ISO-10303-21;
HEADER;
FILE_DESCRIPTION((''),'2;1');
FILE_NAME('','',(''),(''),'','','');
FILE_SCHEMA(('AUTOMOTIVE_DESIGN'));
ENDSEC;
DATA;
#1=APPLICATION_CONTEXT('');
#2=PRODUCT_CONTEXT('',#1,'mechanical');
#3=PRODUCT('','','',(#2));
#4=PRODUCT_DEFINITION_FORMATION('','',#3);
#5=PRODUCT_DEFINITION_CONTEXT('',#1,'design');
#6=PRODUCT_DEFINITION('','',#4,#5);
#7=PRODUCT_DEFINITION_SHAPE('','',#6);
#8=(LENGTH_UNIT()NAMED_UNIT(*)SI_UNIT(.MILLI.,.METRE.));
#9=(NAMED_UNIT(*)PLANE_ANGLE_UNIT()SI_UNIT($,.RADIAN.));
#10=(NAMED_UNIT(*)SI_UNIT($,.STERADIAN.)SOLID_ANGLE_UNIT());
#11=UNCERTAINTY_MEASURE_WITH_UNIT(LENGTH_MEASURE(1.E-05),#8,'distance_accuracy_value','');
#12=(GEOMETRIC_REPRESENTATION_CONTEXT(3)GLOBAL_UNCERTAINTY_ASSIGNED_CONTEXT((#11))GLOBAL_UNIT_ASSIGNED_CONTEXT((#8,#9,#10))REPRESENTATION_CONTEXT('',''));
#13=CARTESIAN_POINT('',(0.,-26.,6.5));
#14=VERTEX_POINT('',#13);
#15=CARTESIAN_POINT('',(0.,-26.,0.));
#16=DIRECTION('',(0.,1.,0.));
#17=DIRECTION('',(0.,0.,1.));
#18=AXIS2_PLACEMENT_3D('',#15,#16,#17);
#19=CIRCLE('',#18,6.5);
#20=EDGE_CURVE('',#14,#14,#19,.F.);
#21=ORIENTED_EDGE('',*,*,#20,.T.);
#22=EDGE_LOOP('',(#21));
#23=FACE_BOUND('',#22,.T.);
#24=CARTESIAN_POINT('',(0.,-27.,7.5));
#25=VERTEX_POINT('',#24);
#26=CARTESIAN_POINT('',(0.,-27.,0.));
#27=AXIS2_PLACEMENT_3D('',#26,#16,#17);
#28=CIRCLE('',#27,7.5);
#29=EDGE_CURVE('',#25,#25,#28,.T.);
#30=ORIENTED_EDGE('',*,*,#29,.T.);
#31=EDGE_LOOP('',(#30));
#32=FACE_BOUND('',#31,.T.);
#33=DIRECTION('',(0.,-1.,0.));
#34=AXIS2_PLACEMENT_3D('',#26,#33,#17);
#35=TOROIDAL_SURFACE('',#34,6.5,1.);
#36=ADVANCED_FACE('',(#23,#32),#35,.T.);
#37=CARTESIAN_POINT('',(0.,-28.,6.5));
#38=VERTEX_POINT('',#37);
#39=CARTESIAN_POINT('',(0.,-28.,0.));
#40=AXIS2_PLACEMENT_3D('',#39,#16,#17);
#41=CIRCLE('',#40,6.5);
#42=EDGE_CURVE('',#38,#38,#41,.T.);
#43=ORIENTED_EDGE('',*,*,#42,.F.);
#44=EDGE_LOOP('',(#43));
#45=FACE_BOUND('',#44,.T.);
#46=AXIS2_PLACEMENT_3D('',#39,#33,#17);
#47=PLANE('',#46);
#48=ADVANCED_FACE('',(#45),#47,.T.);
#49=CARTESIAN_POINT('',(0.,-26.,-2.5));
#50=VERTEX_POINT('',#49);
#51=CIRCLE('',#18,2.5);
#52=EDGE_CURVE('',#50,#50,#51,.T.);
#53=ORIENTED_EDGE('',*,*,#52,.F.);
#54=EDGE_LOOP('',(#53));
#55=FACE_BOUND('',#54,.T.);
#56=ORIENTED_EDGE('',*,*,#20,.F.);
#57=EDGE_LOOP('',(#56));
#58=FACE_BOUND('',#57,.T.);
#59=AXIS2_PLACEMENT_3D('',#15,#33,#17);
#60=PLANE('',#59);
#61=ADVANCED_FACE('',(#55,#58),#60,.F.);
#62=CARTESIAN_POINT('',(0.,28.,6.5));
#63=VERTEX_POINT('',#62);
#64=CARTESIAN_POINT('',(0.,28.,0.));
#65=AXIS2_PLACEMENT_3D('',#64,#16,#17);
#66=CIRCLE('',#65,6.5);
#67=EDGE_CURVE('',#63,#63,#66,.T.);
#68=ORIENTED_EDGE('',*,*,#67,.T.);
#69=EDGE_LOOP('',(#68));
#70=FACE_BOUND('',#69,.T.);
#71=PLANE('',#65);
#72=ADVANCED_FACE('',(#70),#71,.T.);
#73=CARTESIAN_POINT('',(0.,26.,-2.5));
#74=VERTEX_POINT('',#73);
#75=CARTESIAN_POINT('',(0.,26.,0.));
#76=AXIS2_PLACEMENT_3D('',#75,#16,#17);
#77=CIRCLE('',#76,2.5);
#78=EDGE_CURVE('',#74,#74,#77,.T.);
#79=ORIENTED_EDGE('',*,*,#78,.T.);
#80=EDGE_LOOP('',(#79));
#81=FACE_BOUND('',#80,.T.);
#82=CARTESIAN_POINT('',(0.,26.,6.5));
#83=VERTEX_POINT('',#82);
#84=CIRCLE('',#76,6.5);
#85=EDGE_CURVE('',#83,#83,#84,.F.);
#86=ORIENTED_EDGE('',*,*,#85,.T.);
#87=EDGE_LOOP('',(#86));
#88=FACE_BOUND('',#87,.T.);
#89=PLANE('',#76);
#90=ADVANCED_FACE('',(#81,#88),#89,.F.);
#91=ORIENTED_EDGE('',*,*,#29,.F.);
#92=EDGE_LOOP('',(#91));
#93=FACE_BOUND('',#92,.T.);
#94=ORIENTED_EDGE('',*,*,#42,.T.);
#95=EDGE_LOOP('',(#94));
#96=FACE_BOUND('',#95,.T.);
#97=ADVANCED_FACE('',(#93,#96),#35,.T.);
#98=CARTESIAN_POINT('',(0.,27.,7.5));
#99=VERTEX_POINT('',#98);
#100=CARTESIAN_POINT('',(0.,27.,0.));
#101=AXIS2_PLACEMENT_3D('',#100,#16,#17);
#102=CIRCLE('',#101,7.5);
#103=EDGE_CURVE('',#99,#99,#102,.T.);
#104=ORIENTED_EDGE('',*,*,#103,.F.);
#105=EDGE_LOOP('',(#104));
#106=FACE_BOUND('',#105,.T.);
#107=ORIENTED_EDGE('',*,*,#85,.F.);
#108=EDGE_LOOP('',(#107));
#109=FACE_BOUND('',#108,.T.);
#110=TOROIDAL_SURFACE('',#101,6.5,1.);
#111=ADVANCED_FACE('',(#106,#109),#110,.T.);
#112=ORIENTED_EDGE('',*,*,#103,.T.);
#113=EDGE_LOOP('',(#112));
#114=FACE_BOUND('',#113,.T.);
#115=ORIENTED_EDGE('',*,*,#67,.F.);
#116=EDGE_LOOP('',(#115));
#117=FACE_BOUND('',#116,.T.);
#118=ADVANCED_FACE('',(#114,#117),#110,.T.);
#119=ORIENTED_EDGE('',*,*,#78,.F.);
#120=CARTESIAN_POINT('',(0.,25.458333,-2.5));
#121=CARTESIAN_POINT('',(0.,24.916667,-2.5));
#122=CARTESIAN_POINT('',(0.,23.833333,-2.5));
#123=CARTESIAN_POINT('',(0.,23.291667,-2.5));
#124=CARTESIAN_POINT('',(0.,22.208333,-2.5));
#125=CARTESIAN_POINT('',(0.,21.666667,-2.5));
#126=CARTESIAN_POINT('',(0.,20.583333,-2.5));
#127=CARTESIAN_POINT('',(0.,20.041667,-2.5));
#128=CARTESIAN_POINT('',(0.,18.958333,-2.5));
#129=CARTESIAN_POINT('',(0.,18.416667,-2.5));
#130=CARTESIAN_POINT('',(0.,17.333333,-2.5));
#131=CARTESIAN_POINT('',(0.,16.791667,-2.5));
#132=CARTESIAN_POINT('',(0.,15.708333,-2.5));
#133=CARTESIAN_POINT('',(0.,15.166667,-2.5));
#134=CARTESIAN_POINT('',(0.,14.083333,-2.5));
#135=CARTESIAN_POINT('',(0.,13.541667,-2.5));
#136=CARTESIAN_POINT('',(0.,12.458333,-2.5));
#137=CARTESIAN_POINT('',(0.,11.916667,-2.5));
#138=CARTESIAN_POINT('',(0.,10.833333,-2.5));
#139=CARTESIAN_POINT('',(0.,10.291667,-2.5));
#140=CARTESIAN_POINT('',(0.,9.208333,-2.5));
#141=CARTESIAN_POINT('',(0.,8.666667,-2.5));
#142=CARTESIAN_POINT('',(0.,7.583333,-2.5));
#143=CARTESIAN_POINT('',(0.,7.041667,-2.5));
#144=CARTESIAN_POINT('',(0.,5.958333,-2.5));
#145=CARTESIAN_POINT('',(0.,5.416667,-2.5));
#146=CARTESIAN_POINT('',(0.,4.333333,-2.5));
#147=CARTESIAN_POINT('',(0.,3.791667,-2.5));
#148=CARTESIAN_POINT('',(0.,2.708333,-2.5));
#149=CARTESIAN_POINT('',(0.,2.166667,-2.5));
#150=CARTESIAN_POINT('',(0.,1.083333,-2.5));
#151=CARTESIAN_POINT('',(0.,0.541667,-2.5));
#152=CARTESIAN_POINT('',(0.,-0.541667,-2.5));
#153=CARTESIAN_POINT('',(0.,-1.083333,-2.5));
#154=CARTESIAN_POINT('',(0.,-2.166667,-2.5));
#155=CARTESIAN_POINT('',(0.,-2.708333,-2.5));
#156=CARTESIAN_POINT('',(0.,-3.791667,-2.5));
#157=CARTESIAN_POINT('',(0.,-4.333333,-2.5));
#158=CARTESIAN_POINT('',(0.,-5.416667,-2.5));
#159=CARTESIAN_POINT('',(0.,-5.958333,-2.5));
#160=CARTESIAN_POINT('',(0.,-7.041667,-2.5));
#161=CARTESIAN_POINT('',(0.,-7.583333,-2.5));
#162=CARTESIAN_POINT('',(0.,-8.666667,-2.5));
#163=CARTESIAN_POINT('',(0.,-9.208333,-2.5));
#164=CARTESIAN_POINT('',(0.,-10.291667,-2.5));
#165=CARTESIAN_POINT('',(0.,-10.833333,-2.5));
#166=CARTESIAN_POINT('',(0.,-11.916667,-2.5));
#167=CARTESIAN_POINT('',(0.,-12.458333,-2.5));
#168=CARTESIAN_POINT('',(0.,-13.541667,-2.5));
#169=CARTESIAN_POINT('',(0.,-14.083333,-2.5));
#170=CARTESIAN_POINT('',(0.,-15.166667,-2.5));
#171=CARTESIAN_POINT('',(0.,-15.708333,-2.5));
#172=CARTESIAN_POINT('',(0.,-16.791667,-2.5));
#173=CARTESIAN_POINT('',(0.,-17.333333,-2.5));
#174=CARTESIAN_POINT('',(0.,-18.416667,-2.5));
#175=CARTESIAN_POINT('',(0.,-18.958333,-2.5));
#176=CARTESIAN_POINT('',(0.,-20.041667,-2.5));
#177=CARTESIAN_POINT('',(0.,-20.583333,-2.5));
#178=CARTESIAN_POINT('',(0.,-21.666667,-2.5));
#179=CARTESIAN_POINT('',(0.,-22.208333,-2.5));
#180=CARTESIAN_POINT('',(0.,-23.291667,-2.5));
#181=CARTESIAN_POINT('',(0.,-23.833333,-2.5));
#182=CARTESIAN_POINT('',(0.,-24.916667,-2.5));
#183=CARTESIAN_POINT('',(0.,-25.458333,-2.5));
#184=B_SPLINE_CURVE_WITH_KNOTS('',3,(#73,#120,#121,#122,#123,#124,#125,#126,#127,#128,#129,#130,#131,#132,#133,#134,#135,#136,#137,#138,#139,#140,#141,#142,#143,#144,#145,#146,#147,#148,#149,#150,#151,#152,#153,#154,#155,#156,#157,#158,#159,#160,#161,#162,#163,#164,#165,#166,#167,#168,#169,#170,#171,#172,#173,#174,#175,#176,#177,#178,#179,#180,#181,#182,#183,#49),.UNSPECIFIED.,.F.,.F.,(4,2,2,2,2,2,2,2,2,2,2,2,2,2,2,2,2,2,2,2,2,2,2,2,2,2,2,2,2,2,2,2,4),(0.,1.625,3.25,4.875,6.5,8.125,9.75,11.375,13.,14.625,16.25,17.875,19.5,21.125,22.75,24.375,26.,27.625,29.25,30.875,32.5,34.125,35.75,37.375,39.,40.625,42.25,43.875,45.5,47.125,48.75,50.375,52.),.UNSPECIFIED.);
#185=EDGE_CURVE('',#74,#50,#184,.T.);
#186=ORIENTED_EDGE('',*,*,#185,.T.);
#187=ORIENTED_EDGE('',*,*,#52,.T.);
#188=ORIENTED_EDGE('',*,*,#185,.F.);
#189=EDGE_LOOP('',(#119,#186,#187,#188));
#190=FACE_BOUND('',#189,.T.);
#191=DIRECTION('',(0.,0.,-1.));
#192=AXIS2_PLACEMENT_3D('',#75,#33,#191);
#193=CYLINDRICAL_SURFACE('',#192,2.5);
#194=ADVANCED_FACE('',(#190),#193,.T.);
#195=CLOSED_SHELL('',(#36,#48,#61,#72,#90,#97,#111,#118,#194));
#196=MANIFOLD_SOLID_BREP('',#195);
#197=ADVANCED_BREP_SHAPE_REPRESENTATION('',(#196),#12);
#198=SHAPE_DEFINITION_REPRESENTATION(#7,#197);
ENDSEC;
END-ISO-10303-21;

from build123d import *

# Parameters (mm, degrees)
SKETCH1_R           = 2.5
BOSS_EXTRUDE1_DEPTH = 26
SKETCH2_R           = 7.5
BOSS_EXTRUDE2_DEPTH = 2
FILLET1_R           = 1


with BuildPart() as part:
    # Sketch1 → Boss-Extrude1 (new body)
    with BuildSketch(Plane(origin=(0, 0, 0), x_dir=(1, 0, 0), z_dir=(0, 1, 0))):
        with Locations(Location((0, 0, 0), (0, 0, 90))):
            Circle(SKETCH1_R)
    extrude(amount=BOSS_EXTRUDE1_DEPTH)

    # Sketch2 → Boss-Extrude2 (add)
    with BuildSketch(Plane(origin=(0, 26, 0), x_dir=(1, 0, 0), z_dir=(0, 1, 0))):
        with Locations(Location((0, 0, 0), (0, 0, 270))):
            Circle(SKETCH2_R)
    extrude(amount=BOSS_EXTRUDE2_DEPTH)

    # Fillet1
    fillet1_edges = [part.edges().sort_by_distance(p)[0] for p in [
        (0, 26, -7.5),
        (0, 28, -7.5),
    ]]
    fillet(fillet1_edges, radius=FILLET1_R - 0.0001)  # a hair under: the kernel refuses the full size

    # Mirror1: part across plane


with BuildPart() as part_1:
    add(part.part)
    add(part.part.mirror(Plane.ZX))


solid = part_1.part
